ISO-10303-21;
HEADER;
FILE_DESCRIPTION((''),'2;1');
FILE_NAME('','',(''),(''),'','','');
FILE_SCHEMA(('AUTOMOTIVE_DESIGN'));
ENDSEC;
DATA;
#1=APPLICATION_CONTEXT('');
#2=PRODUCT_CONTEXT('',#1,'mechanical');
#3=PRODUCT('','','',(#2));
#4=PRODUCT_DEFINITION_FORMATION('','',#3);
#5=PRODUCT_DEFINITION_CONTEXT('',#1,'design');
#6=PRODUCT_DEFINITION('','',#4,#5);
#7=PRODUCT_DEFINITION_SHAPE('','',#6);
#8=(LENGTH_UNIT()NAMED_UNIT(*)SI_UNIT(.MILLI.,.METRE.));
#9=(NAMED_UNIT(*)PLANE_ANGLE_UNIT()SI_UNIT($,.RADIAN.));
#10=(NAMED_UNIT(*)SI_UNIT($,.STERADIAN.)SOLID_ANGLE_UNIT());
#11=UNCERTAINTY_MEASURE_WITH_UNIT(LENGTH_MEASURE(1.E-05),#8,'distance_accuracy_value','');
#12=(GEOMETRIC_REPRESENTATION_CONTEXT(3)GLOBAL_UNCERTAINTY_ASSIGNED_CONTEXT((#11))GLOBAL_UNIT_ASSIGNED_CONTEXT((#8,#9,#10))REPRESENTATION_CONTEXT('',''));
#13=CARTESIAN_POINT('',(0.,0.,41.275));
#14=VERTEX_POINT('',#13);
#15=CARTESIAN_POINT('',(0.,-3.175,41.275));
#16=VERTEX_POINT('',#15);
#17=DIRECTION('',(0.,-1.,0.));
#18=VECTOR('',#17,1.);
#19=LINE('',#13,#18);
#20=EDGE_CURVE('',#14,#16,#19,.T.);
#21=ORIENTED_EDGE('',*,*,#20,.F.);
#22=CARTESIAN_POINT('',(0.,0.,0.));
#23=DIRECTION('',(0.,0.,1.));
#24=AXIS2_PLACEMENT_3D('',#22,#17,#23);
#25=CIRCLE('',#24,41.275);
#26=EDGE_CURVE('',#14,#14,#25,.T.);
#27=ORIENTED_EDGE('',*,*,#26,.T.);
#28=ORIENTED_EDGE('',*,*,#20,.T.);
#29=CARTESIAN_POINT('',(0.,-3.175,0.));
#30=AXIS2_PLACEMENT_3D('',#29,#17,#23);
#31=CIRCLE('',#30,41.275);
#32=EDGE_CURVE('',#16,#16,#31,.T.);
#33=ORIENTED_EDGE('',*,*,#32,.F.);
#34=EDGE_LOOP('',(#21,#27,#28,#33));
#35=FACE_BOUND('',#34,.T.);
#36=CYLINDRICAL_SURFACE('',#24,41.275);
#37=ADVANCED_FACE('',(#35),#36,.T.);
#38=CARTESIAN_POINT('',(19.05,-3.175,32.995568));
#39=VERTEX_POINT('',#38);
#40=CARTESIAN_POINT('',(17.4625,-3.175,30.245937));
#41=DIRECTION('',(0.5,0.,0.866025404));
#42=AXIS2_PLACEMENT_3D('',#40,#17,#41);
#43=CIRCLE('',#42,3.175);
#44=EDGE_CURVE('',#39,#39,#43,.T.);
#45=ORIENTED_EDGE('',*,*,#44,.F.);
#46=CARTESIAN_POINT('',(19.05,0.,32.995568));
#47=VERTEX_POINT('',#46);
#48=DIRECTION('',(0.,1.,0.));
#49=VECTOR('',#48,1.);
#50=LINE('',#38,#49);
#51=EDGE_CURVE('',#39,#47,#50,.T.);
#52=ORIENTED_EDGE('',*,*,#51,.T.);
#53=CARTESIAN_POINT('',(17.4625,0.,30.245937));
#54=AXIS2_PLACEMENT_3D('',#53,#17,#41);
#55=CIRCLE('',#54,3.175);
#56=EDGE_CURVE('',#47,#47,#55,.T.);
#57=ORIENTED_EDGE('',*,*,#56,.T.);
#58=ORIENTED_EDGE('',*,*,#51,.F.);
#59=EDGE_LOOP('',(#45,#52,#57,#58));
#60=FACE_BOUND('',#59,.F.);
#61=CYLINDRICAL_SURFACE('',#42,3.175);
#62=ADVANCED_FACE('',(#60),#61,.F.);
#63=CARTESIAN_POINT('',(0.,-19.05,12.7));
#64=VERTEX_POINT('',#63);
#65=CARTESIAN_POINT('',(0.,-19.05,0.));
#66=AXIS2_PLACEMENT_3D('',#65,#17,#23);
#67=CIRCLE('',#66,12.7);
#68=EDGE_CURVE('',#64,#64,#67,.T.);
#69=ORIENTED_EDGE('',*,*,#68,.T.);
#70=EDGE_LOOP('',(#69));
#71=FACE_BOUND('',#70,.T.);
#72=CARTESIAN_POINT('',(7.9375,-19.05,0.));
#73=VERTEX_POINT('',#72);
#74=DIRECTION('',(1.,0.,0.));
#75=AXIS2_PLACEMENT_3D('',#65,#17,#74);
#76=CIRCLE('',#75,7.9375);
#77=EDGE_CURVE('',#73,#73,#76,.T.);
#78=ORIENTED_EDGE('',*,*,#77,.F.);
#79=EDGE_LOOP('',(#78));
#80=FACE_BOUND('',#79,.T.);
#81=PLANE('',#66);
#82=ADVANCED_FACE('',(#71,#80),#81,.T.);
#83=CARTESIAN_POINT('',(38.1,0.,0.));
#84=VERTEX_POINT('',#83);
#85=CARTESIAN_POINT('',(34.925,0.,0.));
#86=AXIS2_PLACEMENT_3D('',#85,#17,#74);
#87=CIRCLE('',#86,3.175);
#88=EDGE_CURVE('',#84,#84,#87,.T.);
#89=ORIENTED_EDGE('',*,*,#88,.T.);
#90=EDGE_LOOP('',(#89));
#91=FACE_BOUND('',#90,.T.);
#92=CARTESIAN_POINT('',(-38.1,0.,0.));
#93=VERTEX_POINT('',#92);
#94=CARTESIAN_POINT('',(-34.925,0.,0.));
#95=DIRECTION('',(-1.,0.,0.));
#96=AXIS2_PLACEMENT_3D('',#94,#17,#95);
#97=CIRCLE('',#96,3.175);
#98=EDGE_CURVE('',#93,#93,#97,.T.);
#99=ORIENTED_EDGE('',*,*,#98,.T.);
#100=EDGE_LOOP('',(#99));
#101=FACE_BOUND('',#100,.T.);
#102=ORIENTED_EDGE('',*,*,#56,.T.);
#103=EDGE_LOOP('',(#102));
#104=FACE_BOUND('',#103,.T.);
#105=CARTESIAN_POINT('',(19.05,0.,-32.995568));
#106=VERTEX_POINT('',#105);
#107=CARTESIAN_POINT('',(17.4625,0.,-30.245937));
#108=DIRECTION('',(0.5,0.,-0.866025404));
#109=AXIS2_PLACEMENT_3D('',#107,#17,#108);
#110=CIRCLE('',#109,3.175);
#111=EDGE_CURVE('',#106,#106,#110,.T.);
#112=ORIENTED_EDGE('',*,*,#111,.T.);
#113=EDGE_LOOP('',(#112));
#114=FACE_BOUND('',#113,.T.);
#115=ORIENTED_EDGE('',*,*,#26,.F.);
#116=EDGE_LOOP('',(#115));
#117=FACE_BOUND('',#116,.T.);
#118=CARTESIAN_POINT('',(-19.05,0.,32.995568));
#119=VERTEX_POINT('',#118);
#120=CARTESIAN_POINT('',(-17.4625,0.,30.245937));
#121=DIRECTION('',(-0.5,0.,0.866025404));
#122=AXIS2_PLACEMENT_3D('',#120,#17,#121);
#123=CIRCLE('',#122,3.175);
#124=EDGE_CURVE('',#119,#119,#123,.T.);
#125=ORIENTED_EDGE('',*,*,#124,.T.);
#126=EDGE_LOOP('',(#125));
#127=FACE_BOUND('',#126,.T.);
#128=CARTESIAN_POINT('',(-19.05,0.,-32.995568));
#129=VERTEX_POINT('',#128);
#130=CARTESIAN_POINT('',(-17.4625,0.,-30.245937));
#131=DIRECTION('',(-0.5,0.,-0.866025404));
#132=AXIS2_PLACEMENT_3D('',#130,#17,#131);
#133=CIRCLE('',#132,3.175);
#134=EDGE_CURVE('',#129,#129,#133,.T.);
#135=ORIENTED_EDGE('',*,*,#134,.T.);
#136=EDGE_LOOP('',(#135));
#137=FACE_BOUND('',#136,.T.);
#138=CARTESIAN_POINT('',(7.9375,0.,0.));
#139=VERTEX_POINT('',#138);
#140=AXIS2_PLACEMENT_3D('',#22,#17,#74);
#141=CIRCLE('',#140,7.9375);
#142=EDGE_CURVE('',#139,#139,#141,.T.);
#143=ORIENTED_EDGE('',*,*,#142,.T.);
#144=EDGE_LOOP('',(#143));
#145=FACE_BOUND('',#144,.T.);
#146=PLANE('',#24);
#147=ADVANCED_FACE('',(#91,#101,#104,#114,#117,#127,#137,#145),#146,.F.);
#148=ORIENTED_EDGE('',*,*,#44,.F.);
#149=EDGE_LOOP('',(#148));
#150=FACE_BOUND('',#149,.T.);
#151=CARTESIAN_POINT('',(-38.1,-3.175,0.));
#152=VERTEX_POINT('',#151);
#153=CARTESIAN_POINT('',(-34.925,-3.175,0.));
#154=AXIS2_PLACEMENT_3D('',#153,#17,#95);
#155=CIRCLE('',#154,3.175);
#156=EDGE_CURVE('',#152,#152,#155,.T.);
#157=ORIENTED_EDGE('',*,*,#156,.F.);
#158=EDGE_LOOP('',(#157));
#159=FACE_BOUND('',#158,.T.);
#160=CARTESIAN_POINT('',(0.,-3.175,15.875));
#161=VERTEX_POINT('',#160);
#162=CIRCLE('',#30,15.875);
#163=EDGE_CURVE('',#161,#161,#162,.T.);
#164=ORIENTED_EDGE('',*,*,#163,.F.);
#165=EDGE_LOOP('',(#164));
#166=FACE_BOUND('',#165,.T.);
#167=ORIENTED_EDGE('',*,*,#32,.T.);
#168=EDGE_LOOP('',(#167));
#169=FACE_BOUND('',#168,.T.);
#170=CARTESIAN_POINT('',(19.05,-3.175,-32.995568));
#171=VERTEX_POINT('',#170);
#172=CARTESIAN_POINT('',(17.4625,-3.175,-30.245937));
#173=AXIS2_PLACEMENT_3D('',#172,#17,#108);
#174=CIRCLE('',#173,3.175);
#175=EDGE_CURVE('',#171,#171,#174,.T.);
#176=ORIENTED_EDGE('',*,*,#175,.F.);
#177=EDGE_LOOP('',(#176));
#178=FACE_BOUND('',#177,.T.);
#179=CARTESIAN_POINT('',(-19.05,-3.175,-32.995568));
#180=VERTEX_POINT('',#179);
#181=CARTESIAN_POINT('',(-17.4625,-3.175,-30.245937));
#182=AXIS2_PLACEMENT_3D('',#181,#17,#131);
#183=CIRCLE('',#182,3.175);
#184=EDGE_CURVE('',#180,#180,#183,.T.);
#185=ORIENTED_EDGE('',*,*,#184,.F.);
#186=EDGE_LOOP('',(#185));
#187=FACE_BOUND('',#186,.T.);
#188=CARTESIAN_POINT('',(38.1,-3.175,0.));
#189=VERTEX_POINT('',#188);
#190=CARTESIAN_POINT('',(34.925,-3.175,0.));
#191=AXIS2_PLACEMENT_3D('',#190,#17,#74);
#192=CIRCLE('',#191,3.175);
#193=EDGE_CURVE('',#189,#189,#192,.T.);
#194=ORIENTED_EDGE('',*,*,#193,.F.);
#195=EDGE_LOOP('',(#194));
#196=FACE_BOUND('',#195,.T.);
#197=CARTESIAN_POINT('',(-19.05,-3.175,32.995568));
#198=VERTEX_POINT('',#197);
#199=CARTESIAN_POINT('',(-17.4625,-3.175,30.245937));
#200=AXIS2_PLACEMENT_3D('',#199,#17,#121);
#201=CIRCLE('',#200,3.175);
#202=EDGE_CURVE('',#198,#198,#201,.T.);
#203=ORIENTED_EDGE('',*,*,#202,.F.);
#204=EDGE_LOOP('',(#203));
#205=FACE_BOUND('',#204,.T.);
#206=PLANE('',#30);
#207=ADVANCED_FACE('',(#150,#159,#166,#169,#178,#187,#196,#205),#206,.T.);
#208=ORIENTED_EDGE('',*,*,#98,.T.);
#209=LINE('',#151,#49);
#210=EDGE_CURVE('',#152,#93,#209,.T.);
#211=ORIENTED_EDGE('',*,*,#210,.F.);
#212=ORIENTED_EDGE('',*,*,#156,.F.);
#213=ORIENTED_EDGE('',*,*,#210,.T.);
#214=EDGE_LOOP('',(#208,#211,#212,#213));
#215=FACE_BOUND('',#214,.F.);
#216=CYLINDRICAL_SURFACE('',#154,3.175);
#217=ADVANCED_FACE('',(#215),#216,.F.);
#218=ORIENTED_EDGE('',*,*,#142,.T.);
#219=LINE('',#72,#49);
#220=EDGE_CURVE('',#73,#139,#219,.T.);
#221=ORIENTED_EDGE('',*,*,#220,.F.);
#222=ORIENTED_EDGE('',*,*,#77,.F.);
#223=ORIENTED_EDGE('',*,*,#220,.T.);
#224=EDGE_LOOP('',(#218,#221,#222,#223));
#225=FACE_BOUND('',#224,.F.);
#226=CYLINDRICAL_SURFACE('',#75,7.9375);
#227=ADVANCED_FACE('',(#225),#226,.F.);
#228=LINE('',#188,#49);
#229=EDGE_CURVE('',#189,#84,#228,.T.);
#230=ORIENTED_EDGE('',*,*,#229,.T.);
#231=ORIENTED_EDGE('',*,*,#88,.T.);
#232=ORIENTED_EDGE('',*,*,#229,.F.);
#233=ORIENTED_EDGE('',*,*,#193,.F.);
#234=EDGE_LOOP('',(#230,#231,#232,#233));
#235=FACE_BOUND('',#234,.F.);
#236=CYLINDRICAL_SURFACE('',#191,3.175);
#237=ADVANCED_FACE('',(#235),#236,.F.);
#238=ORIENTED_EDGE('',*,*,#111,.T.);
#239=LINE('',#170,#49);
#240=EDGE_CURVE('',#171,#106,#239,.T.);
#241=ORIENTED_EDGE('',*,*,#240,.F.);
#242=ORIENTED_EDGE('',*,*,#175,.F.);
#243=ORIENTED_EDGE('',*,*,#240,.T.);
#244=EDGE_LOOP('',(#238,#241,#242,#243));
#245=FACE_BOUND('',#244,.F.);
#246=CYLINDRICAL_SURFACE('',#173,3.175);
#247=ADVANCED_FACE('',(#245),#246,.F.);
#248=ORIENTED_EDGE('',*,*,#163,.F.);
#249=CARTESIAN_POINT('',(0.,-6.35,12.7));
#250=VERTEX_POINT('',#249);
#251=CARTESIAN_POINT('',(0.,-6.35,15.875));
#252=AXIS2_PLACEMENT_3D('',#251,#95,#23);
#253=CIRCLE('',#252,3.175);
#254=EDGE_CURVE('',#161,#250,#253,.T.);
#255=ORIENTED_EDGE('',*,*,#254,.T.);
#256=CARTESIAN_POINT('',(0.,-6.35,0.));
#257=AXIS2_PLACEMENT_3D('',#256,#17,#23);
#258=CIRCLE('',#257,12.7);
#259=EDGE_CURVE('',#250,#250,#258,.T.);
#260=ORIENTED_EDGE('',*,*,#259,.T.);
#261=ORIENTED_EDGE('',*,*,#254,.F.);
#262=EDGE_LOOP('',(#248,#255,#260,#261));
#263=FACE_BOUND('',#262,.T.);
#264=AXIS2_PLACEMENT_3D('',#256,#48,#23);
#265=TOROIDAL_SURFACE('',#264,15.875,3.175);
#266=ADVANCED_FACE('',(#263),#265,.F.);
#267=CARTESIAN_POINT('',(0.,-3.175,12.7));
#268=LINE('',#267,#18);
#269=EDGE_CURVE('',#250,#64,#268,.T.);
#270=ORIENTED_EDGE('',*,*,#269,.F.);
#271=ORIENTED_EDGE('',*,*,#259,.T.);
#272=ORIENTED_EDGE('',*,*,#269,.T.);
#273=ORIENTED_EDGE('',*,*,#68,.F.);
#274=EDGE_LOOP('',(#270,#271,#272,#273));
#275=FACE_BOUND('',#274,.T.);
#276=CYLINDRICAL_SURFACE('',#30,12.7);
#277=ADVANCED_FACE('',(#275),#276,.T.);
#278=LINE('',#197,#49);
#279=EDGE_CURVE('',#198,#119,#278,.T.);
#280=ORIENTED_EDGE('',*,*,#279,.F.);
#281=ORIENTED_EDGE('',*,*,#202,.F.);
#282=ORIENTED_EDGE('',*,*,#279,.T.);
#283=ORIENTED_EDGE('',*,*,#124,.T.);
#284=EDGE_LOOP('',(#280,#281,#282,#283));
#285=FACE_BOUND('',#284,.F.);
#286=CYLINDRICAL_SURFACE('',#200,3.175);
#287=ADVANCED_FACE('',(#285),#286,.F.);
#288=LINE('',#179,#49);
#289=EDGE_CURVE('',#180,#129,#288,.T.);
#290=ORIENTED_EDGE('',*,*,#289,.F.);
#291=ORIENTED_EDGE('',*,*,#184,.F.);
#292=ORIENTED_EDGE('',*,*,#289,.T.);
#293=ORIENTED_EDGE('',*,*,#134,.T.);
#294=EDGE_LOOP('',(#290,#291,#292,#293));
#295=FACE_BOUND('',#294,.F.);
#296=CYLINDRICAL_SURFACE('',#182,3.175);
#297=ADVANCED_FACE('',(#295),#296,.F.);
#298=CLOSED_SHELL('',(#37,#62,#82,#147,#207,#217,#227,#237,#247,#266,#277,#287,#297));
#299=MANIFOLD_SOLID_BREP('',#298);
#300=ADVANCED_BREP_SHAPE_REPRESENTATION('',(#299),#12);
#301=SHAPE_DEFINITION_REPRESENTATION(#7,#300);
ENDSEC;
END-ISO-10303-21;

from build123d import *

# Parameters (mm, degrees)
F2_R            = 7.9375
F3_DEPTH        = 19.05
F4_R            = 3.175
F5_DEPTH        = 3.175
F5_COPIES_COUNT = 6
F6_R            = 3.175


# Not quite as in the source:
# - a pattern or mirror of a feature is missing from the dataset's text; its kind, count and spacing are read off the source's solid


with BuildPart() as f1:
    # F0 (on Right) → F1 (revolve)
    with BuildSketch(Plane.YZ):
        Polygon((0, 0), (0, 41.275), (-3.175, 41.275), (-3.175, 12.7), (-19.05, 12.7), (-19.05, 0), align=None)
    revolve(axis=Axis((0, -9.525, 0), (0, -1, 0)))

    # F2 (on face) → F3 (cut, through all)
    with BuildSketch(Plane.XZ.offset(19.05)):
        Circle(F2_R)
    extrude(amount=-F3_DEPTH, mode=Mode.SUBTRACT)

    # F4 (on face) → F5 (cut, through all)
    with BuildSketch(Plane.XZ.offset(3.175)):
        with Locations((34.925, 0)):
            Circle(F4_R)
    f5 = extrude(amount=-F5_DEPTH, mode=Mode.SUBTRACT)

    # F5_copies: F5 ×6 about axis
    f5_copies_axis = Axis((0, 0, 0), (0, 1, 0))
    for i in range(1, F5_COPIES_COUNT):
        add(f5.rotate(f5_copies_axis, i * 360 / F5_COPIES_COUNT), mode=Mode.SUBTRACT)

    # F6
    f6_edges = [f1.edges().sort_by_distance(p)[0] for p in [
        (0, -3.175, -12.7),
    ]]
    fillet(f6_edges, radius=F6_R)


solid = f1.part
